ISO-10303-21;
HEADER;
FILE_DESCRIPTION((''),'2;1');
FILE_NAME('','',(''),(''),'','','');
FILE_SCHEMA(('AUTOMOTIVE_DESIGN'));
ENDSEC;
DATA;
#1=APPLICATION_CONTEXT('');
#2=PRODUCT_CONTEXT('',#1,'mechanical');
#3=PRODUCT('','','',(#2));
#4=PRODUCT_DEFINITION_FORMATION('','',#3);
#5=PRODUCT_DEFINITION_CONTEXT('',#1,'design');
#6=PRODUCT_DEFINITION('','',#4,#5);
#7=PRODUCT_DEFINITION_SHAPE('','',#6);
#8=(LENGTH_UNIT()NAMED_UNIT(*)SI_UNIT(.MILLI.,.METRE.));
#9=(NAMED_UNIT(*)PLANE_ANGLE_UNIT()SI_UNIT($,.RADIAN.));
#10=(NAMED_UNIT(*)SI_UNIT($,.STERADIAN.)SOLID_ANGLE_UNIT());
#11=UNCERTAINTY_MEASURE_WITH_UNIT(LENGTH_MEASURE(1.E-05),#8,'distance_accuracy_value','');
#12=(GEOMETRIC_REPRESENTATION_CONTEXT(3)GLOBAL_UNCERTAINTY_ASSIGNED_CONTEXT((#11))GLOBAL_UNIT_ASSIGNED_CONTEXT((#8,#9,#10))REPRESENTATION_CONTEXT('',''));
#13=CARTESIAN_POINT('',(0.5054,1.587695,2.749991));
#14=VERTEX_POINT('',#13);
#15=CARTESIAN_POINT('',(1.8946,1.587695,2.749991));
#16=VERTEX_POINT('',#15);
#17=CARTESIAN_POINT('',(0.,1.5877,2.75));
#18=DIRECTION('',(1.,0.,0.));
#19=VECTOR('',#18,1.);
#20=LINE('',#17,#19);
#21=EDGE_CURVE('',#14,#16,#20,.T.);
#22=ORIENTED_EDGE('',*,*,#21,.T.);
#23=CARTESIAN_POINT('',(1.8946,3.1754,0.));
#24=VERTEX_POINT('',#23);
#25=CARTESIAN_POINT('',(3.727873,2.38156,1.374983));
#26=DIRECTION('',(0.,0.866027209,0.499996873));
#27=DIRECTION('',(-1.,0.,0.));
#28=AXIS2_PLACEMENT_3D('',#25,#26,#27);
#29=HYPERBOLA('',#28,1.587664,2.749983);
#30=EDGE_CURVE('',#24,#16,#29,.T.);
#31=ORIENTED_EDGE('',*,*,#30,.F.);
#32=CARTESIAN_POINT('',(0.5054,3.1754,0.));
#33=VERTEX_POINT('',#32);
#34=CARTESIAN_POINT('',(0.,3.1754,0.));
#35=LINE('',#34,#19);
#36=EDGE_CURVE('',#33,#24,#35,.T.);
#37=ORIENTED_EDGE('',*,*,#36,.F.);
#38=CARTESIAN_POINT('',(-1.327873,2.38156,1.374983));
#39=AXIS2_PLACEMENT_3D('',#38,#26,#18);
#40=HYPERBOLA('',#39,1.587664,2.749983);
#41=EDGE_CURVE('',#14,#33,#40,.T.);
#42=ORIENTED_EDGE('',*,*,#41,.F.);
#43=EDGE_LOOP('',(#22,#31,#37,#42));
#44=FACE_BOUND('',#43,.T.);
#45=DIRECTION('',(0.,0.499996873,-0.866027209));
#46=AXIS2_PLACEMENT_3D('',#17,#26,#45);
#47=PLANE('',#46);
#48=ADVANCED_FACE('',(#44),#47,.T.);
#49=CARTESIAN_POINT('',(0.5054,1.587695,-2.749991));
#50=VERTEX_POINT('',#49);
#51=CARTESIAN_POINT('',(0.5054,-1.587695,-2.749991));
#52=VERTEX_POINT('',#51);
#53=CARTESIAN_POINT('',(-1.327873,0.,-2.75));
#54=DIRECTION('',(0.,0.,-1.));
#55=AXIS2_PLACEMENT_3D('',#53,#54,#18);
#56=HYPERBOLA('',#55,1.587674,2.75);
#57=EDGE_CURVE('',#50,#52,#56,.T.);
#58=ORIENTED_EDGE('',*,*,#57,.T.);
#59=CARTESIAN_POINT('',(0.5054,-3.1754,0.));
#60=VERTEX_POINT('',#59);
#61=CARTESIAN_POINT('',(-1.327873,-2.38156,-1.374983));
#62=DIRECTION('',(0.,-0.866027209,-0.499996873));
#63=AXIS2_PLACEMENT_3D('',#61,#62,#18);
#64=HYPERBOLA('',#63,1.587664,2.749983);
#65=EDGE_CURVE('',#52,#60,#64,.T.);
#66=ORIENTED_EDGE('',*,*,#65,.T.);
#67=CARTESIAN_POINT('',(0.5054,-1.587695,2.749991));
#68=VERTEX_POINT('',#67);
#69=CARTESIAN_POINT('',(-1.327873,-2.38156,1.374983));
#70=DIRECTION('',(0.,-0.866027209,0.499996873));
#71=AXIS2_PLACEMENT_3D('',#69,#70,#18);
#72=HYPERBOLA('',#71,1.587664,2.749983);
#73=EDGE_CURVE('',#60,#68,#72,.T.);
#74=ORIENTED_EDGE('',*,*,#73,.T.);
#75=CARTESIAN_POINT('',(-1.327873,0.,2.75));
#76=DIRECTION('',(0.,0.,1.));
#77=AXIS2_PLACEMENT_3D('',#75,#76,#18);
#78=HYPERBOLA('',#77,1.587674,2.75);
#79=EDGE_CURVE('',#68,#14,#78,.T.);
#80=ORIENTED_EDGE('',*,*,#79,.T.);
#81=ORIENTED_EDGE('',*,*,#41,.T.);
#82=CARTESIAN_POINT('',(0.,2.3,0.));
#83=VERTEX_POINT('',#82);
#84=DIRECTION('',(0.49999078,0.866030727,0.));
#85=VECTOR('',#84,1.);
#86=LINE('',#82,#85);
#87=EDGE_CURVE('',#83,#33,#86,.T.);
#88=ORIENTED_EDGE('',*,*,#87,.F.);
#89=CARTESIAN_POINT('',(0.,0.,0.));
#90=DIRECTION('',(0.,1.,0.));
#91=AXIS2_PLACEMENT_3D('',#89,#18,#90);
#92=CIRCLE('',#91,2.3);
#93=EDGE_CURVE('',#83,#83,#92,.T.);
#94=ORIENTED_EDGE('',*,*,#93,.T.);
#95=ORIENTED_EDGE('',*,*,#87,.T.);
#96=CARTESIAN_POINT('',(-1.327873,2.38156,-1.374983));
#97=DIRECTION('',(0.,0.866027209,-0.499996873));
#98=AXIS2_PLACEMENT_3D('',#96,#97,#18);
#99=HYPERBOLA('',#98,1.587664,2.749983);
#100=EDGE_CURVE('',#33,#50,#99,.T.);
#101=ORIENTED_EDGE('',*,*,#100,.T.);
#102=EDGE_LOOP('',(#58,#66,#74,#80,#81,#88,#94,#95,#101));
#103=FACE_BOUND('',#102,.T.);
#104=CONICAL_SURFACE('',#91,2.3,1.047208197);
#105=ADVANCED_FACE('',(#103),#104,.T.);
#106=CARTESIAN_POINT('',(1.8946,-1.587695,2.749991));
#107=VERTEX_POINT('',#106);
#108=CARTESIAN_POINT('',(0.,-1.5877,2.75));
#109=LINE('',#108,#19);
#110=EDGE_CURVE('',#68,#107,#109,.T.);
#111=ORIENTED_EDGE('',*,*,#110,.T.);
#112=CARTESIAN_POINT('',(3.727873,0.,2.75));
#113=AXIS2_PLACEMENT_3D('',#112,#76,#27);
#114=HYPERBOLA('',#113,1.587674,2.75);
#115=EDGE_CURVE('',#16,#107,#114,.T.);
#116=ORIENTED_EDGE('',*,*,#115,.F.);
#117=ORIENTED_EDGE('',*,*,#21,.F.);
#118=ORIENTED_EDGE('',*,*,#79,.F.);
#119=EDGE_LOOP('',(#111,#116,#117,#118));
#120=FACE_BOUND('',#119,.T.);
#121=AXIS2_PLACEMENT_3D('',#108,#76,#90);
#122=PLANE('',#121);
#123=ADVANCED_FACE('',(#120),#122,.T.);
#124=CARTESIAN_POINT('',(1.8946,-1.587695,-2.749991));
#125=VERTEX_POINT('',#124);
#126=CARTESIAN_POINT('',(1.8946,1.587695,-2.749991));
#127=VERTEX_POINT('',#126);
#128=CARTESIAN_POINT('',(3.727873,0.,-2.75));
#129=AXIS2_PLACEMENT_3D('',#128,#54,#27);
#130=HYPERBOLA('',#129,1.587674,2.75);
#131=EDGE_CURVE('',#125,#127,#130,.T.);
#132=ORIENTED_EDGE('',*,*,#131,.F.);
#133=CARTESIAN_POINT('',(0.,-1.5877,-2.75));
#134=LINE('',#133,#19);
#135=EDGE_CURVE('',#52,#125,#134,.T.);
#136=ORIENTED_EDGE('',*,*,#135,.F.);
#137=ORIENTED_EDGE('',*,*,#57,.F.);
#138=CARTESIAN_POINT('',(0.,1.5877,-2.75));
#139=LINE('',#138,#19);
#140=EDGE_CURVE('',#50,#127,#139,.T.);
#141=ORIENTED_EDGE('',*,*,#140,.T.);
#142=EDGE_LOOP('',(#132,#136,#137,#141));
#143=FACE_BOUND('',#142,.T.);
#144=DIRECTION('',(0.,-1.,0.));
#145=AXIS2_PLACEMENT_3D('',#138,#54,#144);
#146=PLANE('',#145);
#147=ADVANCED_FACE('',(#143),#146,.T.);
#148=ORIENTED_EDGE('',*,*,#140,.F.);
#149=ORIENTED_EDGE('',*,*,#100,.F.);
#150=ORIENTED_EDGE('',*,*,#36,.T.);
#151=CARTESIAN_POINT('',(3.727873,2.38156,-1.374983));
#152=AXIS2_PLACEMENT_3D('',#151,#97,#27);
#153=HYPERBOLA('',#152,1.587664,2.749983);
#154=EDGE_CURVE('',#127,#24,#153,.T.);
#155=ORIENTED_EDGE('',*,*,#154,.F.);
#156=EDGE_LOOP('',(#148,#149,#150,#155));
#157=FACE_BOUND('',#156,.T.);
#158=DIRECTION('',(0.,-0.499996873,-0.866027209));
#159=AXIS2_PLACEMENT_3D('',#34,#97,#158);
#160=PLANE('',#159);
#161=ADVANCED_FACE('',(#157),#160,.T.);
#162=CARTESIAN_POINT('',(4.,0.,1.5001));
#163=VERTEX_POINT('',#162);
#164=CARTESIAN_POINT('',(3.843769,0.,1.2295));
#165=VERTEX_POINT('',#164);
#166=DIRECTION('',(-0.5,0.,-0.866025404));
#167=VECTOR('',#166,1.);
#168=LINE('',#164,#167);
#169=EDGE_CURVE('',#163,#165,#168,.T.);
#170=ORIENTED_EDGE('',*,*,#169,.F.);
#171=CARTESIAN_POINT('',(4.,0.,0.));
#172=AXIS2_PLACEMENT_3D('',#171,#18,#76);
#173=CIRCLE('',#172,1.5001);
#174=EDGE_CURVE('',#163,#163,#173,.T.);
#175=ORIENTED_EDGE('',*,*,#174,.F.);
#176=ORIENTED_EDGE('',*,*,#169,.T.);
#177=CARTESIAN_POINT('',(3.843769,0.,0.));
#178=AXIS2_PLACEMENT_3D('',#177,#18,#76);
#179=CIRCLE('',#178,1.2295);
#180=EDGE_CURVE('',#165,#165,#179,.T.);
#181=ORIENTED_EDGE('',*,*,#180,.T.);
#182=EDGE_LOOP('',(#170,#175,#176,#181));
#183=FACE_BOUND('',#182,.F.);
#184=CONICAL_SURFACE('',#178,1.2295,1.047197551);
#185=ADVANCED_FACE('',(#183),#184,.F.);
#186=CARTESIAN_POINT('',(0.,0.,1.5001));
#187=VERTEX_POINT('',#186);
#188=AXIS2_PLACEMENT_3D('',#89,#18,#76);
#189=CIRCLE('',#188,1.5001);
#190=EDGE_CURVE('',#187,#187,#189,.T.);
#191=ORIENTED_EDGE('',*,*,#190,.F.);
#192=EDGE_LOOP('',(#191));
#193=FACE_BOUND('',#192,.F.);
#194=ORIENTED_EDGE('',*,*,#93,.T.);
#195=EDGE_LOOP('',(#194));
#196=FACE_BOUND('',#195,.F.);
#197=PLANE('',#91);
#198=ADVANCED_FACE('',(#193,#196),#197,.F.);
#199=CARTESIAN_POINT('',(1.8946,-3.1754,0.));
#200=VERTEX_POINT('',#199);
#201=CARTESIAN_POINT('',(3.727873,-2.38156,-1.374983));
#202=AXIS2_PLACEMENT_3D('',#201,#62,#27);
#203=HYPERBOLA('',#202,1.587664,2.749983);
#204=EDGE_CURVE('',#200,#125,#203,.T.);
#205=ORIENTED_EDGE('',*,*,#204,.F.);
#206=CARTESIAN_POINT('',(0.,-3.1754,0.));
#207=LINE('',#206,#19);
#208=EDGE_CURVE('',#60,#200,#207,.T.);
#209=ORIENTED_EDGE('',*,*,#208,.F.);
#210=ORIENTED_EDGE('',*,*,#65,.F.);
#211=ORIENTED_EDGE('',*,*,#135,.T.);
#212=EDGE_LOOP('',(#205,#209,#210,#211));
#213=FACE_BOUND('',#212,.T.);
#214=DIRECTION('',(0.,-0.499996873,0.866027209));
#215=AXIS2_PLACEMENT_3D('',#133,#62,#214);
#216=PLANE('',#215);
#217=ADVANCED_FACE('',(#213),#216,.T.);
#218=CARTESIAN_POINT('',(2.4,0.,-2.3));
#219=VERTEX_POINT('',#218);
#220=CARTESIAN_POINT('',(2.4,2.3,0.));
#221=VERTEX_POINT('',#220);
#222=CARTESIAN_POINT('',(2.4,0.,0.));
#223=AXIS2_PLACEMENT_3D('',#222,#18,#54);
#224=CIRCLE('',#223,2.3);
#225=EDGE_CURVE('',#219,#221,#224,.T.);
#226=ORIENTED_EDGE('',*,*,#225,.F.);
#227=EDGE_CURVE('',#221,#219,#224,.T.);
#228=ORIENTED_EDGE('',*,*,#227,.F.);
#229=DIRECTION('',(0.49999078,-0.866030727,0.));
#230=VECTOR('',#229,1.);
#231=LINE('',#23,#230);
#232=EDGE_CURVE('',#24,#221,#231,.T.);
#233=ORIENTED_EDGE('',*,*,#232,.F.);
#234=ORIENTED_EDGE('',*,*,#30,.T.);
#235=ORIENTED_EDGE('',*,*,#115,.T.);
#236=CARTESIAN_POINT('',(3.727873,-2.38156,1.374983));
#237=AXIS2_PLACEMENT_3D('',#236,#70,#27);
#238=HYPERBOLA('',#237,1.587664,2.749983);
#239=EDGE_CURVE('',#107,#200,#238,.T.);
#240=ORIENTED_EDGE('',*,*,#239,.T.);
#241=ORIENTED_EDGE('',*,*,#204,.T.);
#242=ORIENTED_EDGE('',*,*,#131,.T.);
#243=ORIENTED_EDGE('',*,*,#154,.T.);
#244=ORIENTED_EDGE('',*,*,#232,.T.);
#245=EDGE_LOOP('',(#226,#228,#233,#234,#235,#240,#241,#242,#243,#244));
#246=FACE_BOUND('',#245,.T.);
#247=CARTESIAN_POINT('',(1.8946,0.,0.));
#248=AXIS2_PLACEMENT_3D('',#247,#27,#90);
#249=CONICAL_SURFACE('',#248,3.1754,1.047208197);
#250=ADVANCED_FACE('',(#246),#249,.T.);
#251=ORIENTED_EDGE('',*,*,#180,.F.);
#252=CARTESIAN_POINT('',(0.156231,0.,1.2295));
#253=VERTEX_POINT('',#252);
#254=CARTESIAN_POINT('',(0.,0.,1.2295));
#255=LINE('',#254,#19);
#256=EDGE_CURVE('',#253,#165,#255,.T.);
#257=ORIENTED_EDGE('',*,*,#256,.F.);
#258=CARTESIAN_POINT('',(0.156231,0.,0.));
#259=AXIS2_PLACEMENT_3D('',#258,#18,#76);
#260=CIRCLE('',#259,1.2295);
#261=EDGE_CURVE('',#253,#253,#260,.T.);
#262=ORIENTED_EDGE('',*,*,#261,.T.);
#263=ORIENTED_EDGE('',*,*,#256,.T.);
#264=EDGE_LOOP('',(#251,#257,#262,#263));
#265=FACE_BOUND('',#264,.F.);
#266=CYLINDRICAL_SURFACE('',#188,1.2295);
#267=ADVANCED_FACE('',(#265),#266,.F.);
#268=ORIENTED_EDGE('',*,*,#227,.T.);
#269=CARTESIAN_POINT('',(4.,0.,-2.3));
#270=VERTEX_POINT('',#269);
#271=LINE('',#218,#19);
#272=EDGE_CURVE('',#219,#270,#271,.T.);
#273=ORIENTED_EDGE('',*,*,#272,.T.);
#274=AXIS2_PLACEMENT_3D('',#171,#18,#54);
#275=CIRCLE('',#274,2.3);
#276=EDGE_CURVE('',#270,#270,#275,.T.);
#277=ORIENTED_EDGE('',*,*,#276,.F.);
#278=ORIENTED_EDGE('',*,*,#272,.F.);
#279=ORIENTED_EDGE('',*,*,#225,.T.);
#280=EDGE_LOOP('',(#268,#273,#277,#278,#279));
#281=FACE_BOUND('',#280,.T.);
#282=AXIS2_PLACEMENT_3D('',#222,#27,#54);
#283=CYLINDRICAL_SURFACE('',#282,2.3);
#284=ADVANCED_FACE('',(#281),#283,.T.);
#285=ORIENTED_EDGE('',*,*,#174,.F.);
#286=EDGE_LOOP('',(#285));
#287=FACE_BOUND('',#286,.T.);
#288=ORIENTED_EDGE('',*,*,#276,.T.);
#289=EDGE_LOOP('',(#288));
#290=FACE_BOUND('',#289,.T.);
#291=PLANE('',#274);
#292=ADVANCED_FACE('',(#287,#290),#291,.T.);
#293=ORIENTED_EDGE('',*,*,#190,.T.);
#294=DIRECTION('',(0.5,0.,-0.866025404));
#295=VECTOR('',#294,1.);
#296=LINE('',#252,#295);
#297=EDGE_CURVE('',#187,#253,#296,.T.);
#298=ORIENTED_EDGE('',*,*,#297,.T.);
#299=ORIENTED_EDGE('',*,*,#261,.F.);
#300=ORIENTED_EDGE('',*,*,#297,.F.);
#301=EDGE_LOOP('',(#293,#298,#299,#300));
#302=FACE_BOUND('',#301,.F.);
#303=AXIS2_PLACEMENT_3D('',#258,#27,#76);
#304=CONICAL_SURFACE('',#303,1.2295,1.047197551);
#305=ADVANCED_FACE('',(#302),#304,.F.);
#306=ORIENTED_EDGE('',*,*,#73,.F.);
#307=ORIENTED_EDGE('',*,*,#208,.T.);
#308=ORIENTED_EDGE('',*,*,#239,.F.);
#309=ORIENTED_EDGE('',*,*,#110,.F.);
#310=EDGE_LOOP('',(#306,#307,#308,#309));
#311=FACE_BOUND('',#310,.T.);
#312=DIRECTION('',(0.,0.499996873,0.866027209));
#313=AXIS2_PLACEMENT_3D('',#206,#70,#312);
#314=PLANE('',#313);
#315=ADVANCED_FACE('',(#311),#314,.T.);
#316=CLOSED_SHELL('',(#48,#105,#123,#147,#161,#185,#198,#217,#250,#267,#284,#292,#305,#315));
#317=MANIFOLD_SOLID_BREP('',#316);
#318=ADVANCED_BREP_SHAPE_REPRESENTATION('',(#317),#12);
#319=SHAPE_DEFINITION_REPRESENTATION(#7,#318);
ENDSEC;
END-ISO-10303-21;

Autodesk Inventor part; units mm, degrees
ref_plane "YZ Plane" through (0, 0, 0) normal (1, 0, 0) x (0, 1, 0)
ref_plane "XZ Plane" through (0, 0, 0) normal (0, 1, 0) x (-1, 0, 0)
sketch "Skizze1" plane through (0, 0, 0) normal (1, 0, 0) x (0, 1, 0)
  line L0 (1.5877, -2.75) -> (-1.5877, -2.75)
  line L1 (-1.5877, -2.75) -> (-3.1754, 0)
  line L2 (-3.1754, 0) -> (-1.5877, 2.75)
  line L3 (-1.5877, 2.75) -> (1.5877, 2.75)
  line L4 (1.5877, 2.75) -> (3.1754, 0)
  line L5 (3.1754, 0) -> (1.5877, -2.75)
  point P0 (0, 0)
  point P1 (0, 0)
  dimension "d0" = 6.3509
extrude "Körper" add sketch "Skizze1" along normal blind 2.4
sketch "Skizze2" plane through (2.4, 0, 0) normal (1, 0, 0) x (0, 0, -1)
  circle A0 centre (0, 0) radius 2.3
  dimension "d7" = 4.6
extrude "Ring" add sketch "Skizze2" along normal blind 1.6
sketch "Skizze3" plane through (0, 0, 0) normal (0, 0, 1) x (1, 0, 0)
  line L0 (0, 1.5877) -> (0, 3.1754) projected
  line L1 (0, 3.1754) -> (2.4, 3.1754) projected
  line L2 (2.4, 1.5877) -> (2.4, 3.1754) projected
  line L3 (-0.48, 0) -> (2.88, 0) projected
  line L4 (0, 2.3) -> (0.5054, 3.1754)
  line L5 (1.8946, 3.1754) -> (2.4, 2.3)
  dimension "d3" = 30
  dimension "d4" = 30
  dimension "d5" = 4.6
  dimension "d6" = 4.6
revolve "Fase1" cut sketch "Skizze3" angle 360 about axis through (-10, 0, 0) along (1, 0, 0)
sketch "Skizze4" plane through (0, 0, 0) normal (-1, 0, 0) x (0, 0, 1)
  line L0 (0, -4.4456) -> (0, 4.4456) projected
  line L1 (-3.85, 0) -> (3.85, 0) projected
  point P0 (0, 0)
hole "Gewinde" at (0, 0, 0) direction (1, 0, 0) diameter 2.459 end through all thread size "M3x0.5" class "6H" standard "ISO Metric profile"
chamfer "Fase2" distance 0.2706 angle 30 1 edges at (0, 0, -1.2295) measured on face at (0, 1.9179, -0.2329)
chamfer "Fase3" distance 0.2706 angle 30 1 edges at (4, 0, -1.2295) measured on face at (4, -0.2816, -1.909)
ref_plane "Work Plane1" through (9.305, 0, 0) normal (0, 0, 1) x (-1, 0, 0)
equation "\"d0\" = 1.1547 * SW"
equation "\"d1\" = KOH1"
equation "\"d7\" = SD2"
equation "\"d8\" = KOH - KOH1"
equation "\"d3\" = ANG1"
equation "\"d4\" = ANG2"
equation "\"d5\" = SW0"
equation "\"d6\" = SW01"
equation "\"d10\" = -0.5 * GD1 + 0.5 * NND"
equation "\"d46\" = -0.5 * GD1 + 0.5 * NND"
equation "\"d12\" = -0.5 * GD1 + 0.5 * NND"
equation "\"d47\" = -0.5 * GD1 + 0.5 * NND"
equation "\"ANG1\" = 30deg"
equation "\"ANG2\" = 30deg"
equation "\"NND\" = 3"
equation "\"KOH1\" = 2.4"
equation "\"KOH\" = 4"
equation "\"SW\" = 5.5"
equation "\"SW0\" = 4.6"
equation "\"SW01\" = SW0"
equation "\"SD2\" = SW0"
equation "\"GUL\" = 0.541266 * PTC"
equation "\"THREADDIA\" = 3"
equation "\"TOA\" = 30deg"
equation "\"PTC\" = 0.5"
equation "\"GAL\" = 0.541266 * PTC"
equation "\"E0\" = 1.155 * SW"
equation "\"GD1\" = 2.458734"
properties part number "DIN 985 - M3" material "Stahl, weich"
